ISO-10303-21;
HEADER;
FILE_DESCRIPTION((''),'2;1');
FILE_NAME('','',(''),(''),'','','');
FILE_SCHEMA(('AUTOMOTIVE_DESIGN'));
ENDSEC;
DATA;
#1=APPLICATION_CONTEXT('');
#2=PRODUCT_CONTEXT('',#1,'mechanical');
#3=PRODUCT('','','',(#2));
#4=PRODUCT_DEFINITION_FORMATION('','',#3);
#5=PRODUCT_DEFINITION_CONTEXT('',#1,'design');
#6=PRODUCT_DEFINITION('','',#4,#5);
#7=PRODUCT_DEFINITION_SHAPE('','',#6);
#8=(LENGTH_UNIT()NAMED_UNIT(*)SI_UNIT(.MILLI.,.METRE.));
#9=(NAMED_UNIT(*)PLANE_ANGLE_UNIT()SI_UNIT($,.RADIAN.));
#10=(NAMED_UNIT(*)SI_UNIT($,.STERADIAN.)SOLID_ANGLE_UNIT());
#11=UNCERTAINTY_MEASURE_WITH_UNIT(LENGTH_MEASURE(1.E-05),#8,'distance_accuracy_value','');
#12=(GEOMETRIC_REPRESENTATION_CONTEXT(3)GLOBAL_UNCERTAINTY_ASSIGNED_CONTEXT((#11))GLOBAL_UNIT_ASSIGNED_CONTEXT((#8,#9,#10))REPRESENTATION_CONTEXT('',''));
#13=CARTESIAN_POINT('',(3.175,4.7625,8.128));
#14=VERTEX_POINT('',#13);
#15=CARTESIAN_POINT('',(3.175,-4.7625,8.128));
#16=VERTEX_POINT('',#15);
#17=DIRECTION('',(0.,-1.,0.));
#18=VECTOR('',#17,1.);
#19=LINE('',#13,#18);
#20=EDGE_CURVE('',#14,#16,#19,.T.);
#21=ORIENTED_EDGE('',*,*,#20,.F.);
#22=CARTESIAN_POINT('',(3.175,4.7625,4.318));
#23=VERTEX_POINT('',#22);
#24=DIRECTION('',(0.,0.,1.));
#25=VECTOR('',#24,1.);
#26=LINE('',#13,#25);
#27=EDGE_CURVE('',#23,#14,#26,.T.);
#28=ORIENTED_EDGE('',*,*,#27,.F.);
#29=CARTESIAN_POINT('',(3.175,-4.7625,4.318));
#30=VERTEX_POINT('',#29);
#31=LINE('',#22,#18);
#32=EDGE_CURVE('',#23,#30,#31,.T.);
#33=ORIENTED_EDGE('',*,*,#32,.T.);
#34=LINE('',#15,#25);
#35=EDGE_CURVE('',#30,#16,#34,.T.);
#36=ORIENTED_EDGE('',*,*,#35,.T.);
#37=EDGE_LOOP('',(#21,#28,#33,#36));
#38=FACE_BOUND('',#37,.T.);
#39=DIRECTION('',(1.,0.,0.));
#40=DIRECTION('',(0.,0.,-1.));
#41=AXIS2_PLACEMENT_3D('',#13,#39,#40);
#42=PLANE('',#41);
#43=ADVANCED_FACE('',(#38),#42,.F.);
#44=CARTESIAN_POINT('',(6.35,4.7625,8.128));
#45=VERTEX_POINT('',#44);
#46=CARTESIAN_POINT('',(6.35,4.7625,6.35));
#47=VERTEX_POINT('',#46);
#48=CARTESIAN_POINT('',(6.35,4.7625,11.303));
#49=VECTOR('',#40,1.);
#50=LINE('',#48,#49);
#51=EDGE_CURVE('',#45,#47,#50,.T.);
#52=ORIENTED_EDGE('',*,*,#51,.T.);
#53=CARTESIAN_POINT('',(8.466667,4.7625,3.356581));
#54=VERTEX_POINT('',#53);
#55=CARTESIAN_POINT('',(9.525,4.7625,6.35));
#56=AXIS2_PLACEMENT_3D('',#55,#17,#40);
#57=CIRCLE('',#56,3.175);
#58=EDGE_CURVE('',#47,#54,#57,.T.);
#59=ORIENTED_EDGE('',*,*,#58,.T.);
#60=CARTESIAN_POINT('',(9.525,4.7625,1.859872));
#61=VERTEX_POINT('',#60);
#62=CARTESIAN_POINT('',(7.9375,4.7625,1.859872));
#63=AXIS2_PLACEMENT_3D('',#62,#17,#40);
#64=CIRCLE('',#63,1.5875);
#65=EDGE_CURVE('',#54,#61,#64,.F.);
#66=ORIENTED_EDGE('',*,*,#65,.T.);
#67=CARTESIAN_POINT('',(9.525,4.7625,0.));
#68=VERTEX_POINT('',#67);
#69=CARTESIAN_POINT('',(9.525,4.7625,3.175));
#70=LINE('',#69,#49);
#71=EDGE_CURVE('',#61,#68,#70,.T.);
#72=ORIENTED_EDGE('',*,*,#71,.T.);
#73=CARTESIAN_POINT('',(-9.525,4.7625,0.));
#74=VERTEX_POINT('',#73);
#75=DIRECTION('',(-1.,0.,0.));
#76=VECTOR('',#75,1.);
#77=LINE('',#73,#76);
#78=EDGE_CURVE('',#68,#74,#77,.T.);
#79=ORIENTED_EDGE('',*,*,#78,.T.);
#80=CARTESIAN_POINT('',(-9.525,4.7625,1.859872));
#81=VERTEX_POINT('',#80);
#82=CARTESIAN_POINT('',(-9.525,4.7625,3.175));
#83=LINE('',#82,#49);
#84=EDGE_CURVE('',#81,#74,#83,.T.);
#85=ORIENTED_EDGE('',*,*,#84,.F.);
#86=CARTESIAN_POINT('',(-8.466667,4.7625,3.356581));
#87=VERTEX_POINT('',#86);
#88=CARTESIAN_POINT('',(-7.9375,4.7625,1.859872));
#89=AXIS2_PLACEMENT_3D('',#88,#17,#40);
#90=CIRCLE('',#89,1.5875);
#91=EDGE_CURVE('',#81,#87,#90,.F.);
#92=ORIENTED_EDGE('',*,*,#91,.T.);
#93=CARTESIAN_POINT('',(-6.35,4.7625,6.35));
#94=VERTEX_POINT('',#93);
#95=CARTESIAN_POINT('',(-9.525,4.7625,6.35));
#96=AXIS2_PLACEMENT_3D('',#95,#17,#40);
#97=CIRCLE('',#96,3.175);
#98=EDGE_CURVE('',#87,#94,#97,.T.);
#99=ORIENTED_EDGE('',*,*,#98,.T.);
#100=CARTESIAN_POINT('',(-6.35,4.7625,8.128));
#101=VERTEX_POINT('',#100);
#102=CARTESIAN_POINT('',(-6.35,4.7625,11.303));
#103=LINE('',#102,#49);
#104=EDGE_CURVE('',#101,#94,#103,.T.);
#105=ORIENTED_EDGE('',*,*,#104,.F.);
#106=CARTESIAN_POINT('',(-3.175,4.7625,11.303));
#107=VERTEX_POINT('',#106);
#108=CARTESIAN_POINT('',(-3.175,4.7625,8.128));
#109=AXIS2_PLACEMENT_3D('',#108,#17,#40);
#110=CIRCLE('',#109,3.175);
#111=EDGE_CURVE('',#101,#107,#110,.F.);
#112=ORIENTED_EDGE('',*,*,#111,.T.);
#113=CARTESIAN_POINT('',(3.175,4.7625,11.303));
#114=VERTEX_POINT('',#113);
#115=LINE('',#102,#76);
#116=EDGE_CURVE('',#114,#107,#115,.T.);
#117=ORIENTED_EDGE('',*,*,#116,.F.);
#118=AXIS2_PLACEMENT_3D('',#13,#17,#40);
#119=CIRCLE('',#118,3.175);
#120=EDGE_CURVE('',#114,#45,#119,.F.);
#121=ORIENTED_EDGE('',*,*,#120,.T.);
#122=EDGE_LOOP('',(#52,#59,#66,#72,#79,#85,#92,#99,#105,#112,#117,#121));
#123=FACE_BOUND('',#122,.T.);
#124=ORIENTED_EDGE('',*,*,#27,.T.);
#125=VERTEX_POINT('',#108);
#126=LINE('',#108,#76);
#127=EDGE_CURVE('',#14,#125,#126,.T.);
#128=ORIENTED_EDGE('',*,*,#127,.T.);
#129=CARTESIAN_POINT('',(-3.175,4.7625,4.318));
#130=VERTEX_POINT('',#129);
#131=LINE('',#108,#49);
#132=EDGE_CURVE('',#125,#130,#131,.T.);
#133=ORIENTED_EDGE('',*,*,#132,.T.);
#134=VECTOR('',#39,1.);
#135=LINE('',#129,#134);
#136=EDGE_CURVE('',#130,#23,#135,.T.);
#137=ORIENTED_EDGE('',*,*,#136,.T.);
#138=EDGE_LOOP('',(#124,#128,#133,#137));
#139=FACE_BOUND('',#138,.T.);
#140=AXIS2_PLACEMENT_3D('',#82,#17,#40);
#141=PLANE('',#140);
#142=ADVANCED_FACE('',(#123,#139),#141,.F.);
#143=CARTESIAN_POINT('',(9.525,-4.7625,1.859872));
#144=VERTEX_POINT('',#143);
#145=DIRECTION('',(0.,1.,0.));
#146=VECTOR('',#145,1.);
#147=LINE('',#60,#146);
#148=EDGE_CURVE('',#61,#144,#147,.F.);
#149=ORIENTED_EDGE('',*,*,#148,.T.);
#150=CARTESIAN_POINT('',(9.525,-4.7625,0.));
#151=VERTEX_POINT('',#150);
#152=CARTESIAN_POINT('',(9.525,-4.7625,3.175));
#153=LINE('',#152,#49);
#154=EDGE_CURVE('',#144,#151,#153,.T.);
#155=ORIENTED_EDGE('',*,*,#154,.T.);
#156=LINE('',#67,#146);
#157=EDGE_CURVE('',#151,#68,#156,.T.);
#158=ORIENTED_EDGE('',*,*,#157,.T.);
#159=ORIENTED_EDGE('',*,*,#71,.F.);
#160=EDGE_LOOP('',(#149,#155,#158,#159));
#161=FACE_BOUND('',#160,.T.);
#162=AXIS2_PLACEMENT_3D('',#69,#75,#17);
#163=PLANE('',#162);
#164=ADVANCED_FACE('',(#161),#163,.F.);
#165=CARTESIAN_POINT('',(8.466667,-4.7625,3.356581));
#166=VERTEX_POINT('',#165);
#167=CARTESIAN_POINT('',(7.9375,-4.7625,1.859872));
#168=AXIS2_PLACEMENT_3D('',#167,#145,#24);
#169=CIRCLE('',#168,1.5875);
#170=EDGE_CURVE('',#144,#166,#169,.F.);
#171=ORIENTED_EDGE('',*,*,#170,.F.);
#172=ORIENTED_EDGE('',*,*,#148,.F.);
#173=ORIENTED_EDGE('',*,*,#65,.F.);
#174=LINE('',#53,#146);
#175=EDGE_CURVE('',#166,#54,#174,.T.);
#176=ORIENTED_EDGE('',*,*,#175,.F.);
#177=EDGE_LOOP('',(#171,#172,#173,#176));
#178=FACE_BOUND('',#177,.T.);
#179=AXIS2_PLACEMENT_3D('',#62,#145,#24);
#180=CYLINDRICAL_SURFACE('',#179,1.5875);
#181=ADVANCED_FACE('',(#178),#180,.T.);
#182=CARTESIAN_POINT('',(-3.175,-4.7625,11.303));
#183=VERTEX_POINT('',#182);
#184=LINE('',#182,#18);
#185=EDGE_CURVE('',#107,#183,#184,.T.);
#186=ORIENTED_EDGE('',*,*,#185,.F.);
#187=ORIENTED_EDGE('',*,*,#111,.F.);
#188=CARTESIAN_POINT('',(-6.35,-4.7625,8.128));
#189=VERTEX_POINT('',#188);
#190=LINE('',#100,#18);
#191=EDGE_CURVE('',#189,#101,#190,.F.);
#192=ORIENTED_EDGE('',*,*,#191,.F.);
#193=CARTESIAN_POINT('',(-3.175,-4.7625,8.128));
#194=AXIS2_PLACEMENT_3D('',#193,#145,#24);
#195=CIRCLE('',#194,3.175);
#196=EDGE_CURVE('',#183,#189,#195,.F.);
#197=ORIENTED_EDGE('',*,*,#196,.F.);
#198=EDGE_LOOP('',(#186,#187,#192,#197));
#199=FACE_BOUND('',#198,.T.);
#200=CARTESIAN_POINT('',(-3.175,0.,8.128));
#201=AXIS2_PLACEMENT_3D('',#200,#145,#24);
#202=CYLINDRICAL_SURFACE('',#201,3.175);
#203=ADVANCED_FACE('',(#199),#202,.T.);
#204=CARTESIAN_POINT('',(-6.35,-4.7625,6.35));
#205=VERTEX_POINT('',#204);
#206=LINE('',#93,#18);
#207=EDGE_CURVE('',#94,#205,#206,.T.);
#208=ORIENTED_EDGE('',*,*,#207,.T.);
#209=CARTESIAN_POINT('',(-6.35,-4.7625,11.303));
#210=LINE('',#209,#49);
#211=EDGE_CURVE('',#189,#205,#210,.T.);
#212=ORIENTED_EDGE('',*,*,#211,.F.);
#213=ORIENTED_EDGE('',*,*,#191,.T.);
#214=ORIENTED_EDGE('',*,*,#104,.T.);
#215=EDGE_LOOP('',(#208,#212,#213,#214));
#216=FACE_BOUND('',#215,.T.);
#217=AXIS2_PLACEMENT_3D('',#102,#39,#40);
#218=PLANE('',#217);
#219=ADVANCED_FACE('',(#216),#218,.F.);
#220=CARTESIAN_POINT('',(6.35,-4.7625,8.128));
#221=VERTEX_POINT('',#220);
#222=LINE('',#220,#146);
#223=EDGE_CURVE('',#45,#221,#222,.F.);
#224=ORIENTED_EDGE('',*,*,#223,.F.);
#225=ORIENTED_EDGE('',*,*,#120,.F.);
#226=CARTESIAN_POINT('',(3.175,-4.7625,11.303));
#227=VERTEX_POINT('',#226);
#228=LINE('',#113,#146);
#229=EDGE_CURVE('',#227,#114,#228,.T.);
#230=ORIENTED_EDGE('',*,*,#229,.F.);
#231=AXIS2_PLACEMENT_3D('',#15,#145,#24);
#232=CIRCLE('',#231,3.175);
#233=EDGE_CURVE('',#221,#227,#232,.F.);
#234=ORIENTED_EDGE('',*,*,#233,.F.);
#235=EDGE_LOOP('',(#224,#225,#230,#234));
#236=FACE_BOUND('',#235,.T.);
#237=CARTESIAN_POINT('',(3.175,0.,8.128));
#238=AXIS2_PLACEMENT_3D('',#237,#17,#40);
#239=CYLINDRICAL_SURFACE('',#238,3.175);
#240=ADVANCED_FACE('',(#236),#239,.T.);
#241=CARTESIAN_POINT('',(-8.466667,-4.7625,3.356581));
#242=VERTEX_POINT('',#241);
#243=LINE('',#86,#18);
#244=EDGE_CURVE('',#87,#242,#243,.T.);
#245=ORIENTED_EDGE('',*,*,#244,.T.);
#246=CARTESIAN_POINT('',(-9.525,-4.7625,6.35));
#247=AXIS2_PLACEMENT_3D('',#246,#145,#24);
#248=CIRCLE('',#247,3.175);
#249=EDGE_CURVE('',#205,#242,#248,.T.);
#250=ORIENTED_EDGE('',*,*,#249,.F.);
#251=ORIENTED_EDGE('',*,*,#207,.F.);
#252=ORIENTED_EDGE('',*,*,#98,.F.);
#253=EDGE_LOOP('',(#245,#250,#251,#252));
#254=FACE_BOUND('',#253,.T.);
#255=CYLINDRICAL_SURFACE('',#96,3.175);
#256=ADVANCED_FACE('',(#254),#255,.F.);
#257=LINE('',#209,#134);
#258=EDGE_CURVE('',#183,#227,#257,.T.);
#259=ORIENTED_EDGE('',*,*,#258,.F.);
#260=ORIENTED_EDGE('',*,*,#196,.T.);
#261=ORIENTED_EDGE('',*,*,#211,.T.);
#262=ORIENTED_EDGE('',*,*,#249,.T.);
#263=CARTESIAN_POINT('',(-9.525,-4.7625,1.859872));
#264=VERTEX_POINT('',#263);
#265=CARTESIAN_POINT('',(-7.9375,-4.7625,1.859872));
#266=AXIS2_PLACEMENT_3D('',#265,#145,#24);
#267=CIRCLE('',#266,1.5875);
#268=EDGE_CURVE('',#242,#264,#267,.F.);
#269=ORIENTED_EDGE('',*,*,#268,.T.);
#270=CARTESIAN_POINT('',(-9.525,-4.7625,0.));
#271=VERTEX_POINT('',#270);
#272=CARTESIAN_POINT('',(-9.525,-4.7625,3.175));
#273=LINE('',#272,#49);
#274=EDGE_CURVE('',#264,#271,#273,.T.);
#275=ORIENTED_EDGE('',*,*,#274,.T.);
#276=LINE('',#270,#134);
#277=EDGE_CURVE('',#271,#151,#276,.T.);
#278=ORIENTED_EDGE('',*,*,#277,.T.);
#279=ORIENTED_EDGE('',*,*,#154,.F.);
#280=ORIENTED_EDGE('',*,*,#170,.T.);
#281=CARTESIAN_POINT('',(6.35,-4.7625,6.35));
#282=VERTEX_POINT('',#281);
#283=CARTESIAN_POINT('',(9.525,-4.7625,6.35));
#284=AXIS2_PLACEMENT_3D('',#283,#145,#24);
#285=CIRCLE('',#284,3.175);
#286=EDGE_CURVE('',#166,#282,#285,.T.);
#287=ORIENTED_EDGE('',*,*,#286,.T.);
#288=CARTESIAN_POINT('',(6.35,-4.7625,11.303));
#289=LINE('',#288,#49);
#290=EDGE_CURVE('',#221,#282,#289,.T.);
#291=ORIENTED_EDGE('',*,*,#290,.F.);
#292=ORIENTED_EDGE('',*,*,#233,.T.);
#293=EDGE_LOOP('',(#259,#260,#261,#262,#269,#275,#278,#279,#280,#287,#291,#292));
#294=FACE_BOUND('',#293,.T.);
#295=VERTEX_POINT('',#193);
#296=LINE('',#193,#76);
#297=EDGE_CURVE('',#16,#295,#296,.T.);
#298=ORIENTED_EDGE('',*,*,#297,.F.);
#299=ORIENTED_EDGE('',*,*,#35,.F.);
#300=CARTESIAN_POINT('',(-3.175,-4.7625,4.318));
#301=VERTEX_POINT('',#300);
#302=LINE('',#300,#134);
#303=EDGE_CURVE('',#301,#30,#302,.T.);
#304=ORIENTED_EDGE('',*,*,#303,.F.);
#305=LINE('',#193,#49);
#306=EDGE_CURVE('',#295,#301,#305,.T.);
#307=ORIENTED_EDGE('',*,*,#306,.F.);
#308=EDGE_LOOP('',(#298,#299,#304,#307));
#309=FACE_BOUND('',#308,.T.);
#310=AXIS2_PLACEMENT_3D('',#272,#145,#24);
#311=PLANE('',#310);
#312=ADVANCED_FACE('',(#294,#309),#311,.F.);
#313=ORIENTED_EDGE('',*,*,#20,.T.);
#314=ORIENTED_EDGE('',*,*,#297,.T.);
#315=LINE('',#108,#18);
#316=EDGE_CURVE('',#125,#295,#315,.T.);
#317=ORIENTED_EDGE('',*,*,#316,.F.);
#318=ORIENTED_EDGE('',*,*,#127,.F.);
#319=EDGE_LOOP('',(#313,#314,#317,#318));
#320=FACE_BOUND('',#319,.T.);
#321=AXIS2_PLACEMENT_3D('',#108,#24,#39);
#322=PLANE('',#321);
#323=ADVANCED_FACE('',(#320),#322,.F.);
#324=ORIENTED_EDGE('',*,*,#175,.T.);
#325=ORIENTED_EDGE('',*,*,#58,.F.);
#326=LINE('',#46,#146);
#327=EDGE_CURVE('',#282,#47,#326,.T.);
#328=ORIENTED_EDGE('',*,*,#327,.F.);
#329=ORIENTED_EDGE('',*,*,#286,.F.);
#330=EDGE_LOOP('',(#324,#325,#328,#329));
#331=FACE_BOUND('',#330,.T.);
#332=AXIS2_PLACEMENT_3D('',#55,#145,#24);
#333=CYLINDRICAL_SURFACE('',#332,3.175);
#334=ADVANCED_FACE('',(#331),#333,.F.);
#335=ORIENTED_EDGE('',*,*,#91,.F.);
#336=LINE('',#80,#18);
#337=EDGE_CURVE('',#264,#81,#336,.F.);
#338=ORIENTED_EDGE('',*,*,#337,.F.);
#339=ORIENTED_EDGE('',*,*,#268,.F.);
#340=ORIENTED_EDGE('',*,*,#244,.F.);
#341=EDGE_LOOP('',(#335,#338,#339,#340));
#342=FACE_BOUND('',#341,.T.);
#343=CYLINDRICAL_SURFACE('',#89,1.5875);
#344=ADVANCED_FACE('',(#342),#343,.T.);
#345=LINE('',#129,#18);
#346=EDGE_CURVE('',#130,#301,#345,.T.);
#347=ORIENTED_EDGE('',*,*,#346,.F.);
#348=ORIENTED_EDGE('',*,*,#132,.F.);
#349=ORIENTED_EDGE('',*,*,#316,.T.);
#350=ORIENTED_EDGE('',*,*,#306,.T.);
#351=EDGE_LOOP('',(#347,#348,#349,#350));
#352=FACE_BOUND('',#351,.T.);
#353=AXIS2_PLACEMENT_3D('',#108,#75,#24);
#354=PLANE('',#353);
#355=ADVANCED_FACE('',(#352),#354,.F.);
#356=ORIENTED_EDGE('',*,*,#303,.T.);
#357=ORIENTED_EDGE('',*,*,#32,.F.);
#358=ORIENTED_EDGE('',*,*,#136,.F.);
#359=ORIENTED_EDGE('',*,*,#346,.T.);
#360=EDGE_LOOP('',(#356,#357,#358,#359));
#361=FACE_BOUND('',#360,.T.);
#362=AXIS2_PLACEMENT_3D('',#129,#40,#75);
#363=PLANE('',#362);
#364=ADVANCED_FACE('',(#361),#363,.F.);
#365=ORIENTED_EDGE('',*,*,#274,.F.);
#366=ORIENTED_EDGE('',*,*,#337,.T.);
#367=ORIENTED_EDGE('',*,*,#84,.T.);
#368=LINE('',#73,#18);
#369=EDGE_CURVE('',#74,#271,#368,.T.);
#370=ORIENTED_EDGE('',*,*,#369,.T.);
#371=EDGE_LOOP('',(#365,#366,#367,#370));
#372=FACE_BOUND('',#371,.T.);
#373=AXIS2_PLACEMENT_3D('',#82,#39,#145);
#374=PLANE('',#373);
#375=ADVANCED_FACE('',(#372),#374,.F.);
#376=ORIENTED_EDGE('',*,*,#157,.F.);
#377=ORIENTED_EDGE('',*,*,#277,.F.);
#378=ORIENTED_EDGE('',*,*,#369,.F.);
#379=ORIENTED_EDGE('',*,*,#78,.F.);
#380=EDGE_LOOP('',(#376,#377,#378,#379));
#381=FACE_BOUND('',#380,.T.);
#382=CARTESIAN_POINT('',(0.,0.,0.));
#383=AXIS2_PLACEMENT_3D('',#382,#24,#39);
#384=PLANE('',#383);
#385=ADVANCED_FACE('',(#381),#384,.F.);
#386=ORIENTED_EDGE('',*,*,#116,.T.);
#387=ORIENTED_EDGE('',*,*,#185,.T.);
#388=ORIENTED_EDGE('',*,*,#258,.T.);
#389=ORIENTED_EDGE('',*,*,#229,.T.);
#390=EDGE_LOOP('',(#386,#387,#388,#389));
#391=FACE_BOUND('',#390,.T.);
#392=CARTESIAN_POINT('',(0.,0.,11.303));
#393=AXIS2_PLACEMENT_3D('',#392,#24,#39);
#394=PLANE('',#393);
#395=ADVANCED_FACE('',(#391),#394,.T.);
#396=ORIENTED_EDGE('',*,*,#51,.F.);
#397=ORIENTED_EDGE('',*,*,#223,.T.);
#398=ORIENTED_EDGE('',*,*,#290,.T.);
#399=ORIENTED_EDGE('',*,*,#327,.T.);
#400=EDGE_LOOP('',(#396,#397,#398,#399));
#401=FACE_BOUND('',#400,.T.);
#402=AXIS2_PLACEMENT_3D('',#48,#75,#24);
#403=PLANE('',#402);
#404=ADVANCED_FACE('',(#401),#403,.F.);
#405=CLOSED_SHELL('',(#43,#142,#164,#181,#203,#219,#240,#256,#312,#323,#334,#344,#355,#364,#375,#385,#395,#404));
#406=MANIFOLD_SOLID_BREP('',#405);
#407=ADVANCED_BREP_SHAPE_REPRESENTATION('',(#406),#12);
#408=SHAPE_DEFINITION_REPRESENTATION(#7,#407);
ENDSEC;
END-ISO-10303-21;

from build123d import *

# Parameters (mm, degrees)
SKETCH1_W           = 19.05
SKETCH1_H           = 9.525
BOSS_EXTRUDE1_DEPTH = 3.175
SKETCH2_W           = 12.7
SKETCH2_H           = 9.525
BOSS_EXTRUDE2_DEPTH = 8.128
SKETCH3_W           = 6.35
SKETCH3_H           = 3.81
CUT_EXTRUDE1_DEPTH  = 18.584341301
FILLET1_START       = -4.7625
FILLET1_DEPTH       = 9.525
FILLET1_2_DEPTH     = 9.525
FILLET2_R           = 1.5875


with BuildPart() as part:
    # Sketch1 → Boss-Extrude1 (new body)
    with BuildSketch(Plane.XY):
        Rectangle(SKETCH1_W, SKETCH1_H)
    extrude(amount=BOSS_EXTRUDE1_DEPTH)

    # Sketch2 → Boss-Extrude2 (add)
    with BuildSketch(Plane.XY.offset(3.175)):
        Rectangle(SKETCH2_W, SKETCH2_H)
    extrude(amount=BOSS_EXTRUDE2_DEPTH)

    # Sketch3 → Cut-Extrude1 (cut, through all)
    with BuildSketch(Plane.XZ.offset(4.7625)):
        with Locations((0, 6.223)):
            Rectangle(SKETCH3_W, SKETCH3_H)
    extrude(amount=-CUT_EXTRUDE1_DEPTH, mode=Mode.SUBTRACT)

    # Fillet1: read off the stored shape, not the designer's step
    # Fillet1 outline → Fillet1 (cut)
    with BuildSketch(Plane(origin=(0, 0, 0), x_dir=(1, 0, 0), z_dir=(0, 1, 0)).offset(FILLET1_START)):
        with BuildLine():
            ThreePointArc((6.35, -8.128), (5.42006403, -10.37306403), (3.175, -11.303))
            Line((3.175, -11.303), (6.35, -11.303))
            Line((6.35, -11.303), (6.35, -8.128))
        make_face()
        with BuildLine():
            ThreePointArc((-3.175, -11.303), (-5.42006403, -10.37306403), (-6.35, -8.128))
            Line((-6.35, -8.128), (-6.35, -11.303))
            Line((-6.35, -11.303), (-3.175, -11.303))
        make_face()
    extrude(amount=FILLET1_DEPTH, mode=Mode.SUBTRACT)

    # Fillet1 2 outline → Fillet1 2 (add)
    with BuildSketch(Plane(origin=(0, 0, 0), x_dir=(1, 0, 0), z_dir=(0, 1, 0)).offset(FILLET1_START)):
        with BuildLine():
            Line((6.35, -3.175), (6.35, -6.35))
            ThreePointArc((6.35, -6.35), (7.27993597, -4.10493597), (9.525, -3.175))
            Line((9.525, -3.175), (6.35, -3.175))
        make_face()
        with BuildLine():
            ThreePointArc((-9.525, -3.175), (-7.27993597, -4.10493597), (-6.35, -6.35))
            Line((-6.35, -6.35), (-6.35, -3.175))
            Line((-6.35, -3.175), (-9.525, -3.175))
        make_face()
    extrude(amount=FILLET1_2_DEPTH)

    # Fillet2
    fillet2_edges = [part.edges().sort_by_distance(p)[0] for p in [
        (-9.525, 0, 3.175),
        (9.525, 0, 3.175),
    ]]
    fillet(fillet2_edges, radius=FILLET2_R)


solid = part.part
